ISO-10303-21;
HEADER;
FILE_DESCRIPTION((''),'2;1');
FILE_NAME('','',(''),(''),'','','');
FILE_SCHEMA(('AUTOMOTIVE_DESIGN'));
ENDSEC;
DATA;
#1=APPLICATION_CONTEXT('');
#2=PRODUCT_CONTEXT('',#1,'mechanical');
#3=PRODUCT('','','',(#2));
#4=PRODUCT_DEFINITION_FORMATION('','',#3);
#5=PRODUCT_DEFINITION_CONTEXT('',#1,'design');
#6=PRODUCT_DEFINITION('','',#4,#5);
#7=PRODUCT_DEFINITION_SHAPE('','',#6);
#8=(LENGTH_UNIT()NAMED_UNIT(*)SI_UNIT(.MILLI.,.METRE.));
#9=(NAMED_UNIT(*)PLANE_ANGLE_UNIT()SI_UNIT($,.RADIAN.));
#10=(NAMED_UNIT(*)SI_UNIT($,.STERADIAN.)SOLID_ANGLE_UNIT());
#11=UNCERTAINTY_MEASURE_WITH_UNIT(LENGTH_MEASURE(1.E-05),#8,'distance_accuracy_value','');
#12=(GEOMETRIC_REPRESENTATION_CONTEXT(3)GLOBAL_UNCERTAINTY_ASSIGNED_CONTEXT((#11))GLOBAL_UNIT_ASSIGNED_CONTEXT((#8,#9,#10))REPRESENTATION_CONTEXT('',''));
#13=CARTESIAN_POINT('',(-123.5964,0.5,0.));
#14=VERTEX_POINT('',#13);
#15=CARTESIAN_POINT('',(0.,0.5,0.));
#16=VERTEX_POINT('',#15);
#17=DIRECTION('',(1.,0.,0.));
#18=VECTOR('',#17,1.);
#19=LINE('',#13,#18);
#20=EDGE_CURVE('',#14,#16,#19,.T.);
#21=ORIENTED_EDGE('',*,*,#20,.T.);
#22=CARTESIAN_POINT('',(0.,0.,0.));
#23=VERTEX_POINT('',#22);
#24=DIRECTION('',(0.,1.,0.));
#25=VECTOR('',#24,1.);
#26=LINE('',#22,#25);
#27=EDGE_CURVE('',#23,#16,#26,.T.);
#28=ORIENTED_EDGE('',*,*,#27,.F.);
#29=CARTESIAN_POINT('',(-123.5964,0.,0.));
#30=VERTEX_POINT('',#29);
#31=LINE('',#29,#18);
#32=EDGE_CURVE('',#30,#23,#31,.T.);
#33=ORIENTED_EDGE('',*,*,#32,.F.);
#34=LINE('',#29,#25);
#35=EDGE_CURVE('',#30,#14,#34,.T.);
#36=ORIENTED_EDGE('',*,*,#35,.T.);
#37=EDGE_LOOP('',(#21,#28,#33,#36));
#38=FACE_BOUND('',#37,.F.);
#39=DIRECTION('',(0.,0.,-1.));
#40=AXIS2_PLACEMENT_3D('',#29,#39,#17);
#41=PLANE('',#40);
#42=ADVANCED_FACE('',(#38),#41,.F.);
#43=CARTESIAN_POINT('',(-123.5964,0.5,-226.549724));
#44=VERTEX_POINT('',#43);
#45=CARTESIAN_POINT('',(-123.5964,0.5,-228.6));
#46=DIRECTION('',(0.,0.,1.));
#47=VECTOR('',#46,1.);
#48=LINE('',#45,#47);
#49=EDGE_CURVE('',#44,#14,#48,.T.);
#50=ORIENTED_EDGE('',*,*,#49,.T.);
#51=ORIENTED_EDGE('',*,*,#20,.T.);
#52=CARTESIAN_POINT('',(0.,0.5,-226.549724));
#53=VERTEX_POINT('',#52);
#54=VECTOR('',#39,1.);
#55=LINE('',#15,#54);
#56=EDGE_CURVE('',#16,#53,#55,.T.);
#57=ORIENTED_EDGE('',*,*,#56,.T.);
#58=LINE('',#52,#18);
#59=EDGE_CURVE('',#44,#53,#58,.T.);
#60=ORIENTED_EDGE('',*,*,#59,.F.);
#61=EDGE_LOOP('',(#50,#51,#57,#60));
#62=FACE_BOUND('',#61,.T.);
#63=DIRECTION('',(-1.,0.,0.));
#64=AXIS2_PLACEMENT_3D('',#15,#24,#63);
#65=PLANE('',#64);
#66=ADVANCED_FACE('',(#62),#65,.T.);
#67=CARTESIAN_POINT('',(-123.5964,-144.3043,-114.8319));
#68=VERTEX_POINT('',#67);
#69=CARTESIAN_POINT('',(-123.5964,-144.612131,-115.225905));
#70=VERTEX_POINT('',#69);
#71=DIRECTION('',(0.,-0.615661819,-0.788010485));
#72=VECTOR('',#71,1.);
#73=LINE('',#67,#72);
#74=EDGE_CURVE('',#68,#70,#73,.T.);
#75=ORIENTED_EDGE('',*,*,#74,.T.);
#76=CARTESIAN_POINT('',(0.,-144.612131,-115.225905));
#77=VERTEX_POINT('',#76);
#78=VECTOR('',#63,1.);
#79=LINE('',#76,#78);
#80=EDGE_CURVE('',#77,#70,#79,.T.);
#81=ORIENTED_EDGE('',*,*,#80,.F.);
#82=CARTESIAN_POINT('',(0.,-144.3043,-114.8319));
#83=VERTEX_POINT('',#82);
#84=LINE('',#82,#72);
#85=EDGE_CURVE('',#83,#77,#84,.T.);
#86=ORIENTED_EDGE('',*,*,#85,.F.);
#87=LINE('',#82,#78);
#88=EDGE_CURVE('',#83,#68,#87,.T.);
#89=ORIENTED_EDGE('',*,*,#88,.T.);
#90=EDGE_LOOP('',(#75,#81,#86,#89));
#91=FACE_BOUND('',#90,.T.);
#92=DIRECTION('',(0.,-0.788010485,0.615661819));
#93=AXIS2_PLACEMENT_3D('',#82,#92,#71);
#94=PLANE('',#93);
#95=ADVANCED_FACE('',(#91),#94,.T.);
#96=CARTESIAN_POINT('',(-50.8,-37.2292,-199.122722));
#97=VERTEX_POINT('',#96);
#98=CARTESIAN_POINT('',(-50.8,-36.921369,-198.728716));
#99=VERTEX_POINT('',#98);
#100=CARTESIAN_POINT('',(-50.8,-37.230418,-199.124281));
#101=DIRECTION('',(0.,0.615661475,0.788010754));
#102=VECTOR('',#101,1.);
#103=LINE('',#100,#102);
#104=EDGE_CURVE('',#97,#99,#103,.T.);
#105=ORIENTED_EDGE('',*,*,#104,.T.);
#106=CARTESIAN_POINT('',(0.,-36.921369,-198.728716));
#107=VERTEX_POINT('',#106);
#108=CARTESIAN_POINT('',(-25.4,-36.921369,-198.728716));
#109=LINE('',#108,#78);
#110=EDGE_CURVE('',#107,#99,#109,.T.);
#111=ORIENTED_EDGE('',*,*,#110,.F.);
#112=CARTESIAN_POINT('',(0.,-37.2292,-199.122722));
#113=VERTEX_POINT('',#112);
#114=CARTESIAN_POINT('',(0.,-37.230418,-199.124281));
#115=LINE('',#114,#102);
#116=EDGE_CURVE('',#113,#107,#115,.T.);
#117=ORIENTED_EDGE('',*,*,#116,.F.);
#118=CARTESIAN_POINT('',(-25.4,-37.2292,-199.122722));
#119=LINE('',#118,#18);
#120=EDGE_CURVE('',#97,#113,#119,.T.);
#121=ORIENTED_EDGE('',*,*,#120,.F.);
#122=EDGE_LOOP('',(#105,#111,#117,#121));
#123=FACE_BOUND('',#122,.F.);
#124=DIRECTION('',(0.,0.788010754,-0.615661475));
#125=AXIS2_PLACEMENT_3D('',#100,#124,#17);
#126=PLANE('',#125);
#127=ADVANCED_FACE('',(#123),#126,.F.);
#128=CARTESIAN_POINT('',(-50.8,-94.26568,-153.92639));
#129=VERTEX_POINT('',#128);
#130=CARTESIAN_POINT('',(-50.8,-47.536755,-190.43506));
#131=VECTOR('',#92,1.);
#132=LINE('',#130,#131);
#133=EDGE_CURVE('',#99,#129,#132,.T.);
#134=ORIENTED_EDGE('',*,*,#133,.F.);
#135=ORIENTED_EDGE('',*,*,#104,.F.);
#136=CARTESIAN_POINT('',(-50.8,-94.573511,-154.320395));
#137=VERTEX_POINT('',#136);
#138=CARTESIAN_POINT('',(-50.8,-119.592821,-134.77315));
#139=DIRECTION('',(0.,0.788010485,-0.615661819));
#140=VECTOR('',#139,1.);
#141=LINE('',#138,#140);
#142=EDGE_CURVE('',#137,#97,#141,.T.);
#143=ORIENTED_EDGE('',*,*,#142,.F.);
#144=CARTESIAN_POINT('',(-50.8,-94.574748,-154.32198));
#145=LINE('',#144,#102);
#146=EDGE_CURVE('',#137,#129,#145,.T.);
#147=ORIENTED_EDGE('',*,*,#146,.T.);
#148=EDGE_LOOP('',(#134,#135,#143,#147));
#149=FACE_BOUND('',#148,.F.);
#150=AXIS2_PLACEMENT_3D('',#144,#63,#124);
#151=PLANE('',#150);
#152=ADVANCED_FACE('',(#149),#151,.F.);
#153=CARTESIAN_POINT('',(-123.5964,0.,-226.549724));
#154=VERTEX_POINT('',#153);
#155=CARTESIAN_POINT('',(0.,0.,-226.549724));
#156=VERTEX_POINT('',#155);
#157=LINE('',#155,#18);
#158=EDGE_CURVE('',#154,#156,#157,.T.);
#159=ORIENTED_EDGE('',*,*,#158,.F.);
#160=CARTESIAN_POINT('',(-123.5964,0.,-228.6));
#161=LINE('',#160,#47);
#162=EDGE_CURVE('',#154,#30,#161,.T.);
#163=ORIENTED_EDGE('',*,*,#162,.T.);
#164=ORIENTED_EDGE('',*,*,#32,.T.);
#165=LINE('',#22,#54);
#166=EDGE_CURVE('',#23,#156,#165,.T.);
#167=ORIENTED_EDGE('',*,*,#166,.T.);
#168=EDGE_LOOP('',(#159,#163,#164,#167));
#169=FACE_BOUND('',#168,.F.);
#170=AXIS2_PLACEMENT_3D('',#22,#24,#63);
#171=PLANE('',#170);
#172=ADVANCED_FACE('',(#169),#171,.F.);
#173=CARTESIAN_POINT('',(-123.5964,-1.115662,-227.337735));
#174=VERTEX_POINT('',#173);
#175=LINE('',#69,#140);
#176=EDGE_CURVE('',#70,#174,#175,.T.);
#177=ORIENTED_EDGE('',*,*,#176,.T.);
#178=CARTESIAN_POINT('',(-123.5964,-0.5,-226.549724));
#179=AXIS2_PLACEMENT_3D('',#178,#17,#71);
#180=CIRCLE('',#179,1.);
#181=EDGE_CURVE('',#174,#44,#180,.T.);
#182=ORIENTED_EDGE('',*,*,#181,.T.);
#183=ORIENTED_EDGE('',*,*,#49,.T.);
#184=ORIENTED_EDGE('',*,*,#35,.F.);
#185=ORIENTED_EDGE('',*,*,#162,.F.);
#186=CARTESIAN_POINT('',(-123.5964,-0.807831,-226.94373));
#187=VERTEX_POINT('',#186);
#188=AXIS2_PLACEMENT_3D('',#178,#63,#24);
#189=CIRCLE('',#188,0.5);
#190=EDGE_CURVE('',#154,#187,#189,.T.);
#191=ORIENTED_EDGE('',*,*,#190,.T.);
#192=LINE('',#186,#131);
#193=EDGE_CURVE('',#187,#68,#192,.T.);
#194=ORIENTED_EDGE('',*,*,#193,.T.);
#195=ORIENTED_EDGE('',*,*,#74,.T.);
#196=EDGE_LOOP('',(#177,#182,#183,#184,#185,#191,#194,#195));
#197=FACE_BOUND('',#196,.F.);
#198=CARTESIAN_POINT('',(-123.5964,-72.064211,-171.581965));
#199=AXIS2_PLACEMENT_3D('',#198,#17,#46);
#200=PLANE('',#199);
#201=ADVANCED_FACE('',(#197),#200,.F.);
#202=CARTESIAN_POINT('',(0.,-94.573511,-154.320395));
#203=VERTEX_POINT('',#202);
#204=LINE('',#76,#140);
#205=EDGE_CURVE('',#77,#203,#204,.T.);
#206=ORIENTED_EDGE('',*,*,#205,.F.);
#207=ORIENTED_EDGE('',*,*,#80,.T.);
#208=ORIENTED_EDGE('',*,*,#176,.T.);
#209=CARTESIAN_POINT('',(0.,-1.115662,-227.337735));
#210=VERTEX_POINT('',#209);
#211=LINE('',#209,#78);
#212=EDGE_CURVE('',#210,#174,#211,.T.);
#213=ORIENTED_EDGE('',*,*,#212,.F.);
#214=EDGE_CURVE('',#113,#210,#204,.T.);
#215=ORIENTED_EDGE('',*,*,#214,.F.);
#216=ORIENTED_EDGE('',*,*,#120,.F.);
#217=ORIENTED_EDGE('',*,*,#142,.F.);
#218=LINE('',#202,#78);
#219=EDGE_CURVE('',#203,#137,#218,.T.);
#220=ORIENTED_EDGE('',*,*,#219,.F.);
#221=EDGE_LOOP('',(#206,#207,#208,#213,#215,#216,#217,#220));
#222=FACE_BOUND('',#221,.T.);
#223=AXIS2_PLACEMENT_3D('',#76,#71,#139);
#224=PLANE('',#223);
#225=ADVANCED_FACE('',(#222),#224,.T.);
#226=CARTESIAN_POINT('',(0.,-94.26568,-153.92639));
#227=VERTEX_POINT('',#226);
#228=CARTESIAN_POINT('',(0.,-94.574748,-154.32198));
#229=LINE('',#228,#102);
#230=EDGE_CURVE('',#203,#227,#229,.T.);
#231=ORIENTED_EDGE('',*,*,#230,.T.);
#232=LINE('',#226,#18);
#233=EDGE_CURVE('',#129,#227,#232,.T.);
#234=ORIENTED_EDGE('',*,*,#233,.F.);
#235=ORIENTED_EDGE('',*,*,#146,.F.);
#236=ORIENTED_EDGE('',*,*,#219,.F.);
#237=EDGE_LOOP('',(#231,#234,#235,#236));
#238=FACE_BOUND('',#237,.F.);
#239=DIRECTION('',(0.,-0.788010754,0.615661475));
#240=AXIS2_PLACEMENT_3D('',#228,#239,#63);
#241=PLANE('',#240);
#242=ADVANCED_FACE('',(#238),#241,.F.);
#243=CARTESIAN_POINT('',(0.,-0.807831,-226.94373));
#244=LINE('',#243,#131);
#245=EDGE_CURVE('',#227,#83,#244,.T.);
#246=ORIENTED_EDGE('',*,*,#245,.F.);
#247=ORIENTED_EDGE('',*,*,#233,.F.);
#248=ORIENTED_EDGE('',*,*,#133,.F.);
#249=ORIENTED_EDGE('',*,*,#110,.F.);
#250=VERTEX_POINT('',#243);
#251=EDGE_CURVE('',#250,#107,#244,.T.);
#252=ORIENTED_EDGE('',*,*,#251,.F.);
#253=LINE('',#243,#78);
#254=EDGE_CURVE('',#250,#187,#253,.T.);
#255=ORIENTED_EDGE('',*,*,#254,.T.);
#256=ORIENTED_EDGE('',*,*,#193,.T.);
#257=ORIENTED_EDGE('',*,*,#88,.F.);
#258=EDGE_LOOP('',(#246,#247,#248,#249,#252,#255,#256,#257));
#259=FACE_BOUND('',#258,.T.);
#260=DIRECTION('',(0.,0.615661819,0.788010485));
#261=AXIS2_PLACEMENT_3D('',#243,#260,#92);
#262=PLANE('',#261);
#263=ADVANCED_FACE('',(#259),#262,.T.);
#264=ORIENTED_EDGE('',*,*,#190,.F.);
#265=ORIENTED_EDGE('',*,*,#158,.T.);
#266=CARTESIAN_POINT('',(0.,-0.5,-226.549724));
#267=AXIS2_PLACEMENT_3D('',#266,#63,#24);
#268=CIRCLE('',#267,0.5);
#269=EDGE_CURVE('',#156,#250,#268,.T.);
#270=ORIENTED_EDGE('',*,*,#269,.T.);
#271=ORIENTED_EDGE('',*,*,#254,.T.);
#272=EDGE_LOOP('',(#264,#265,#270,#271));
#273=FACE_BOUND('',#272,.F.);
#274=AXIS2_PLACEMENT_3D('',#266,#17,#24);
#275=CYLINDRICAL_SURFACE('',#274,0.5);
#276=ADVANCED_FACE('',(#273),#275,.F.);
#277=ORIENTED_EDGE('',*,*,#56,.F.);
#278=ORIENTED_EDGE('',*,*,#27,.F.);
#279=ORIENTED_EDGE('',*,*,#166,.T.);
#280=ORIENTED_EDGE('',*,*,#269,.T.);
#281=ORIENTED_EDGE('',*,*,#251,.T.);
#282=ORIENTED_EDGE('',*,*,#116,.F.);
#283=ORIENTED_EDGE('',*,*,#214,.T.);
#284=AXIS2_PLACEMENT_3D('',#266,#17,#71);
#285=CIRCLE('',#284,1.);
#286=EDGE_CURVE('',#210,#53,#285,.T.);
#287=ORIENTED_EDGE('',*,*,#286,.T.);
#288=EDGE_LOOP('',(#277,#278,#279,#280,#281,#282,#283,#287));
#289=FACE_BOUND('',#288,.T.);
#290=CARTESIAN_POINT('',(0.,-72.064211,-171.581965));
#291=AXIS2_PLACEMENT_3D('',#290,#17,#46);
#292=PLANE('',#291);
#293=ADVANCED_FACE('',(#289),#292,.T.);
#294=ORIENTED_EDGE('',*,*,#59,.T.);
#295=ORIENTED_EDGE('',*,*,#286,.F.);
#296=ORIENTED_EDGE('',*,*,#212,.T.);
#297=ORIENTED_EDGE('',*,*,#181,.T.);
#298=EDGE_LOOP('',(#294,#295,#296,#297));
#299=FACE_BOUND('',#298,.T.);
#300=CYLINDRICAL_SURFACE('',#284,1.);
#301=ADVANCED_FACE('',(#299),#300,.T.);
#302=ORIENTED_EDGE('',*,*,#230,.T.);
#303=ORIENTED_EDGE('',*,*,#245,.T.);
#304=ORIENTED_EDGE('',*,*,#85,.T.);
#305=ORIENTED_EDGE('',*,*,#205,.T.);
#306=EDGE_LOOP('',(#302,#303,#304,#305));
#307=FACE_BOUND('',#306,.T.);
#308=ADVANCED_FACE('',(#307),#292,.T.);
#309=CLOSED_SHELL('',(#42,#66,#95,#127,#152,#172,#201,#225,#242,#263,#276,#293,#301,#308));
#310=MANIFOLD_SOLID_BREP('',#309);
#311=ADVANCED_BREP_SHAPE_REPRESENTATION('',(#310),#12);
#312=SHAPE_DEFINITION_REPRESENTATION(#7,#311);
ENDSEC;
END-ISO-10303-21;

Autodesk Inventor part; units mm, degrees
ref_plane "YZ Plane" through (0, 0, 0) normal (1, 0, 0) x (0, 1, 0)
ref_plane "XZ Plane" through (0, 0, 0) normal (0, 1, 0) x (-1, 0, 0)
ref_plane "XY Plane" through (0, 0, 0) normal (0, 0, 1) x (1, 0, 0)
sketch "Sketch1" plane through (0, 0, 0) normal (0, 1, 0) x (-1, 0, 0)
  line L0 (0, 0) -> (0, -228.6)
  line L1 (0, -228.6) -> (123.5964, -228.6)
  line L2 (123.5964, -228.6) -> (123.5964, 0)
  line L3 (123.5964, 0) -> (0, 0)
  dimension "d0" = 228.6
  dimension "d1" = 123.5964
extrude "Plate1" add sketch "Sketch1" along normal blind 0.5
sketch "Sketch2" plane through (0, 0.8078, -228.206) normal (0, -0.6156615, -0.7880108) x (1, 0, 0)
  line L0 (-123.5964, 0) -> (0, 0)
  line L1 (0, 0) -> (0, 184.15)
  line L2 (0, 184.15) -> (-123.5964, 184.15)
  line L3 (-123.5964, 184.15) -> (-123.5964, 0)
edge flange "Flange1" height 184.15 angle 128 thickness 0.5 bend radius 0.5 thickness toward (0, -0.6156615, -0.7880108) relief tear relief width 0.5 relief depth 0.25 edges at (-61.7982, 0, -228.6) wall of the first edge with corners at (-123.5964, 0.8078, -228.206) (0, 0.8078, -228.206) (0, -144.3043, -114.8319) (-123.5964, -144.3043, -114.8319)
bend "Bend1"
corner "Corner1"
ref_plane "Work Plane2" through (-123.5964, 0, -114.3) normal (0, 0, -1) x (1, 0, 0)
ref_plane "Work Plane1" through (-123.5964, 0, 0) normal (0, 0, -1) x (1, 0, 0)
sketch "Sketch4" plane through (0, -144.6122, -115.2259) normal (0, -0.6156615, -0.7880108) x (-1, 0, 0)
  line L0 (0, 63.5) -> (50.8, 63.5)
  line L1 (50.8, 63.5) -> (50.8, 136.271)
  line L2 (50.8, 136.271) -> (0, 136.271)
  line L3 (0, 0) -> (0, 182.0997) projected
  line L4 (0, 63.5) -> (0, 136.271)
  line L5 (123.5964, 0) -> (0, 0) projected
  dimension "d22" = 50.8
  dimension "d23" = 63.5
  dimension "d24" = 72.771
extrude "Cut2" cut sketch "Sketch4" against normal blind 0.5
equation "\"d25\" = Thickness"
equation "\"d3\" = BendReliefWidth"
equation "\"d4\" = BendReliefDepth"
equation "\"d5\" = MinimumRemnant"
equation "\"d6\" = BendRadius"
equation "\"d9\" = BendRadius"
equation "\"d10\" = CornerReliefSize"
equation "\"d11\" = GapSize"
equation "\"d12\" = JacobiRadiusSize"
equation "\"BendRadius\" = Thickness"
equation "\"BendReliefWidth\" = Thickness"
equation "\"BendReliefDepth\" = 0.5 * Thickness"
equation "\"CornerReliefSize\" = 4 * Thickness"
equation "\"MinimumRemnant\" = 2 * Thickness"
equation "\"TransitionRadius\" = BendRadius"
equation "\"JacobiRadiusSize\" = BendRadius"
equation "\"GapSize\" = Thickness"
equation "\"d2\" = BendRadius"
equation "\"Thickness\" = 0.5"
properties part number "Autofeeder frame1"
